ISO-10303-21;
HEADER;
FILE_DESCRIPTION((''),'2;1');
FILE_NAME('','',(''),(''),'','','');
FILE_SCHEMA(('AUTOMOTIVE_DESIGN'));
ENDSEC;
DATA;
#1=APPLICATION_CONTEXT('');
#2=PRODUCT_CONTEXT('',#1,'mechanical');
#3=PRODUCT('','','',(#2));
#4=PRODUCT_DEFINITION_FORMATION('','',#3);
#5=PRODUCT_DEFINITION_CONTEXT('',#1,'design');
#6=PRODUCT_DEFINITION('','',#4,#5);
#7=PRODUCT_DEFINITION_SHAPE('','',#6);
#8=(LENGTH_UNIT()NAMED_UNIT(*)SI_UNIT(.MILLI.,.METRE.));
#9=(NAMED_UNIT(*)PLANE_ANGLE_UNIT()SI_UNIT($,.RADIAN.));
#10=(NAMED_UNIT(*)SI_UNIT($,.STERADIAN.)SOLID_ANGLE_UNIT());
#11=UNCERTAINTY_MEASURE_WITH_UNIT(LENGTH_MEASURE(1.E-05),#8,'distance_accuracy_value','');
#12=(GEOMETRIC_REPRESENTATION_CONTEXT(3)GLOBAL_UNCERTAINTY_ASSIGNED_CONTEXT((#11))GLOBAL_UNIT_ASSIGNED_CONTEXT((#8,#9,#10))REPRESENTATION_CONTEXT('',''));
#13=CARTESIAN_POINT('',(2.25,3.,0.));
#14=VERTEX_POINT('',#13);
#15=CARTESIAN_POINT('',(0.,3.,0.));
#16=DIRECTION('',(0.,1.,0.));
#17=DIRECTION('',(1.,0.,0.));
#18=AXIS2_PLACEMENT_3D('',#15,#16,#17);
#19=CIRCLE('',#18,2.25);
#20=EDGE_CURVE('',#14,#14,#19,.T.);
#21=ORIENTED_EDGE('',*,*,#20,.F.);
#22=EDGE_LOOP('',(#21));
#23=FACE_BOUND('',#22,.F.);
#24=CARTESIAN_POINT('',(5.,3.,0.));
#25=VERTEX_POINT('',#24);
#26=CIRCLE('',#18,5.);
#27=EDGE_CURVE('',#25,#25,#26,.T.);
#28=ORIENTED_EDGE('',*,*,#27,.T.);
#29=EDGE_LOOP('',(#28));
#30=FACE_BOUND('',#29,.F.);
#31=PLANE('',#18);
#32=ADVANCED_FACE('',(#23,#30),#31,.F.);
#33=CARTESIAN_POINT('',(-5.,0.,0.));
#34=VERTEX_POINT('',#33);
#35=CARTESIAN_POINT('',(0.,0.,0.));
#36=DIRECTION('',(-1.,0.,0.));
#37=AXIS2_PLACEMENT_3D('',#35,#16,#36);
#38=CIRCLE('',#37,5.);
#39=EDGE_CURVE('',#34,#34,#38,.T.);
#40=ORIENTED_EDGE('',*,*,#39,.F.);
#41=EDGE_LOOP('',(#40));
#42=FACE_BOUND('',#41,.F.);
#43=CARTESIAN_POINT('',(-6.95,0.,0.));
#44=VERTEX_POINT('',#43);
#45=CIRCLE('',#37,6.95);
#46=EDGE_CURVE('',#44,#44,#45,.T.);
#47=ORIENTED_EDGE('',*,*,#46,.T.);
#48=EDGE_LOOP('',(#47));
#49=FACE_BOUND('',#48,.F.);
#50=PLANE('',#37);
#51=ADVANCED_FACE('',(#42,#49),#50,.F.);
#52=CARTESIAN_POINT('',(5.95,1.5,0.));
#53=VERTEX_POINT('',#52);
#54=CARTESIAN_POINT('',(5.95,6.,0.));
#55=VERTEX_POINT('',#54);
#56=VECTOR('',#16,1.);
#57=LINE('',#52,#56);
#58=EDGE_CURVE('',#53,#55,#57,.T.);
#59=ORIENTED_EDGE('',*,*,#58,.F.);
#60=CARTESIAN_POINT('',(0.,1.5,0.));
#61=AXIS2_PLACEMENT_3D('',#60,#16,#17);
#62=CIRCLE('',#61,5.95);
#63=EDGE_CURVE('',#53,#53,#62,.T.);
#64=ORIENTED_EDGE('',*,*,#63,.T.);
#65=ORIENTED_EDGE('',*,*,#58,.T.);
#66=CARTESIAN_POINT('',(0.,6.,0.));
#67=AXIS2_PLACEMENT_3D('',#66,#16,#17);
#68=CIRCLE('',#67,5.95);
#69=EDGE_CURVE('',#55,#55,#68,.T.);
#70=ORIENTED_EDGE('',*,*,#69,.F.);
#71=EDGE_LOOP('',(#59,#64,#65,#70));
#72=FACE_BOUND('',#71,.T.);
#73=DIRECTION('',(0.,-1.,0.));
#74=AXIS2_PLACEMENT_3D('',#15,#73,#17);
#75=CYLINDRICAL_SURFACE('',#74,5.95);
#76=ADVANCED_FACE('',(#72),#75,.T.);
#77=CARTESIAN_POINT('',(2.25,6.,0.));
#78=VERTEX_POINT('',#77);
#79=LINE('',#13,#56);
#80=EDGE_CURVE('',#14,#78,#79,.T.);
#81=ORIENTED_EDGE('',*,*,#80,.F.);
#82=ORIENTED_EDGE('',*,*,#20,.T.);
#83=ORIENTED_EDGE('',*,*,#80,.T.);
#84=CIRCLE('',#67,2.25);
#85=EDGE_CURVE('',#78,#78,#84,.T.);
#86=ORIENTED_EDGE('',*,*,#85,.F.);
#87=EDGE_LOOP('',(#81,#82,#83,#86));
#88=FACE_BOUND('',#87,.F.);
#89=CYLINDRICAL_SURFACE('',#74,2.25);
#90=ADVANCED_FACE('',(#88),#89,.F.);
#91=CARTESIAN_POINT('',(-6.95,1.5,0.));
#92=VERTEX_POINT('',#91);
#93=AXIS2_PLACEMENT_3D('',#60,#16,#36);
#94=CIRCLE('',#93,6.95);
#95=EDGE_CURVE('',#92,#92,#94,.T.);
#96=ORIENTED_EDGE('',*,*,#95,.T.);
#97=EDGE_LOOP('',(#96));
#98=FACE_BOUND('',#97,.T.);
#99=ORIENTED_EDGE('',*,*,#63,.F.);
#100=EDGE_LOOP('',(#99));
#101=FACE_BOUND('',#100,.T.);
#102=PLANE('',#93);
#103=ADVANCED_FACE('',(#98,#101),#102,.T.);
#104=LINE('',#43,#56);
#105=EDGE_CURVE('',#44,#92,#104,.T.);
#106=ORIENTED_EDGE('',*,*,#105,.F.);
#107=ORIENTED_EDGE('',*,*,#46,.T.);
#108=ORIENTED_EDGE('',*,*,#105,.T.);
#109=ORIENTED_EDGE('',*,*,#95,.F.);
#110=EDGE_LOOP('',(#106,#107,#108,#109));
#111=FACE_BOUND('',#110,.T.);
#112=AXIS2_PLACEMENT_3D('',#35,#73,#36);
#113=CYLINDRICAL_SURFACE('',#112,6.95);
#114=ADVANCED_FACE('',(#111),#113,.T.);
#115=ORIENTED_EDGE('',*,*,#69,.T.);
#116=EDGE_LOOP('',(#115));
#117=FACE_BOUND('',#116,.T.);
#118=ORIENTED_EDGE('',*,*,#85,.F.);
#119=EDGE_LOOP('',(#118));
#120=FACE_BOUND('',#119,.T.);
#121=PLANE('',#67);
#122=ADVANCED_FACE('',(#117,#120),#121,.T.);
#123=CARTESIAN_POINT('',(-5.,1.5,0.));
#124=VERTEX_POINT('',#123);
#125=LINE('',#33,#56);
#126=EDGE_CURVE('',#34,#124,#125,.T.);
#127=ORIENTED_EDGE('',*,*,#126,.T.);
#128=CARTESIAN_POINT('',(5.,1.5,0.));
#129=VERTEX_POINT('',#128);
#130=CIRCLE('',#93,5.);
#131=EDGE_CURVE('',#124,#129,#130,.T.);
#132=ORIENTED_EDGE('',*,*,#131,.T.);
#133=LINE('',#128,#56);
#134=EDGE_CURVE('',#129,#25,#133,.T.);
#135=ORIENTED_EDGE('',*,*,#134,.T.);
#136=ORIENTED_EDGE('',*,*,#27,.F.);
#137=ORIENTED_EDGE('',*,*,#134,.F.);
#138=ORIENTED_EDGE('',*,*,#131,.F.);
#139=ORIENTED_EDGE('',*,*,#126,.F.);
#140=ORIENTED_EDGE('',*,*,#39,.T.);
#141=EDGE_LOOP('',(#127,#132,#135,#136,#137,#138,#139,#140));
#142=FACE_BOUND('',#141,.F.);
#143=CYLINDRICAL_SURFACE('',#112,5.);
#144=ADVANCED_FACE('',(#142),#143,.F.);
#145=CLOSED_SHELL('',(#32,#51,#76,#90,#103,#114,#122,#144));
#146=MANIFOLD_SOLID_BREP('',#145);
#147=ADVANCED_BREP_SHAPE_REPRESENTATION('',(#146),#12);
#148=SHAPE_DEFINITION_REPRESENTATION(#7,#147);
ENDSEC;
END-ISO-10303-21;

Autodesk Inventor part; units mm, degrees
ref_plane "YZ Plane" through (0, 0, 0) normal (1, 0, 0) x (0, 1, 0)
ref_plane "XZ Plane" through (0, 0, 0) normal (0, 1, 0) x (-1, 0, 0)
ref_plane "XY Plane" through (0, 0, 0) normal (0, 0, 1) x (1, 0, 0)
sketch "Esquisse1" plane through (0, 0, 0) normal (0, 1, 0) x (-1, 0, 0)
  circle A0 centre (0, 0) radius 6.95
  circle A1 centre (0, 0) radius 5
  dimension "d0" = 13.9
  dimension "d1" = 10
extrude "Extrusion1" add sketch "Esquisse1" along normal blind 1.5
sketch "Esquisse2" plane through (0, 1.5, 0) normal (0, 1, 0) x (1, 0, 0)
  circle A0 centre (0, 0) radius 5 projected
  circle A1 centre (0, 0) radius 5.95
  dimension "d4" = 11.9
extrude "Extrusion2" add sketch "Esquisse2" along normal blind 1.5
sketch "Esquisse3" plane through (0, 3, 0) normal (0, 1, 0) x (1, 0, 0)
  circle A0 centre (0, 0) radius 2.25
  circle A1 centre (0, 0) radius 5.95 projected
  dimension "d7" = 4.5
extrude "Extrusion3" add sketch "Esquisse3" along normal blind 3
properties part number "moyeu_end"
